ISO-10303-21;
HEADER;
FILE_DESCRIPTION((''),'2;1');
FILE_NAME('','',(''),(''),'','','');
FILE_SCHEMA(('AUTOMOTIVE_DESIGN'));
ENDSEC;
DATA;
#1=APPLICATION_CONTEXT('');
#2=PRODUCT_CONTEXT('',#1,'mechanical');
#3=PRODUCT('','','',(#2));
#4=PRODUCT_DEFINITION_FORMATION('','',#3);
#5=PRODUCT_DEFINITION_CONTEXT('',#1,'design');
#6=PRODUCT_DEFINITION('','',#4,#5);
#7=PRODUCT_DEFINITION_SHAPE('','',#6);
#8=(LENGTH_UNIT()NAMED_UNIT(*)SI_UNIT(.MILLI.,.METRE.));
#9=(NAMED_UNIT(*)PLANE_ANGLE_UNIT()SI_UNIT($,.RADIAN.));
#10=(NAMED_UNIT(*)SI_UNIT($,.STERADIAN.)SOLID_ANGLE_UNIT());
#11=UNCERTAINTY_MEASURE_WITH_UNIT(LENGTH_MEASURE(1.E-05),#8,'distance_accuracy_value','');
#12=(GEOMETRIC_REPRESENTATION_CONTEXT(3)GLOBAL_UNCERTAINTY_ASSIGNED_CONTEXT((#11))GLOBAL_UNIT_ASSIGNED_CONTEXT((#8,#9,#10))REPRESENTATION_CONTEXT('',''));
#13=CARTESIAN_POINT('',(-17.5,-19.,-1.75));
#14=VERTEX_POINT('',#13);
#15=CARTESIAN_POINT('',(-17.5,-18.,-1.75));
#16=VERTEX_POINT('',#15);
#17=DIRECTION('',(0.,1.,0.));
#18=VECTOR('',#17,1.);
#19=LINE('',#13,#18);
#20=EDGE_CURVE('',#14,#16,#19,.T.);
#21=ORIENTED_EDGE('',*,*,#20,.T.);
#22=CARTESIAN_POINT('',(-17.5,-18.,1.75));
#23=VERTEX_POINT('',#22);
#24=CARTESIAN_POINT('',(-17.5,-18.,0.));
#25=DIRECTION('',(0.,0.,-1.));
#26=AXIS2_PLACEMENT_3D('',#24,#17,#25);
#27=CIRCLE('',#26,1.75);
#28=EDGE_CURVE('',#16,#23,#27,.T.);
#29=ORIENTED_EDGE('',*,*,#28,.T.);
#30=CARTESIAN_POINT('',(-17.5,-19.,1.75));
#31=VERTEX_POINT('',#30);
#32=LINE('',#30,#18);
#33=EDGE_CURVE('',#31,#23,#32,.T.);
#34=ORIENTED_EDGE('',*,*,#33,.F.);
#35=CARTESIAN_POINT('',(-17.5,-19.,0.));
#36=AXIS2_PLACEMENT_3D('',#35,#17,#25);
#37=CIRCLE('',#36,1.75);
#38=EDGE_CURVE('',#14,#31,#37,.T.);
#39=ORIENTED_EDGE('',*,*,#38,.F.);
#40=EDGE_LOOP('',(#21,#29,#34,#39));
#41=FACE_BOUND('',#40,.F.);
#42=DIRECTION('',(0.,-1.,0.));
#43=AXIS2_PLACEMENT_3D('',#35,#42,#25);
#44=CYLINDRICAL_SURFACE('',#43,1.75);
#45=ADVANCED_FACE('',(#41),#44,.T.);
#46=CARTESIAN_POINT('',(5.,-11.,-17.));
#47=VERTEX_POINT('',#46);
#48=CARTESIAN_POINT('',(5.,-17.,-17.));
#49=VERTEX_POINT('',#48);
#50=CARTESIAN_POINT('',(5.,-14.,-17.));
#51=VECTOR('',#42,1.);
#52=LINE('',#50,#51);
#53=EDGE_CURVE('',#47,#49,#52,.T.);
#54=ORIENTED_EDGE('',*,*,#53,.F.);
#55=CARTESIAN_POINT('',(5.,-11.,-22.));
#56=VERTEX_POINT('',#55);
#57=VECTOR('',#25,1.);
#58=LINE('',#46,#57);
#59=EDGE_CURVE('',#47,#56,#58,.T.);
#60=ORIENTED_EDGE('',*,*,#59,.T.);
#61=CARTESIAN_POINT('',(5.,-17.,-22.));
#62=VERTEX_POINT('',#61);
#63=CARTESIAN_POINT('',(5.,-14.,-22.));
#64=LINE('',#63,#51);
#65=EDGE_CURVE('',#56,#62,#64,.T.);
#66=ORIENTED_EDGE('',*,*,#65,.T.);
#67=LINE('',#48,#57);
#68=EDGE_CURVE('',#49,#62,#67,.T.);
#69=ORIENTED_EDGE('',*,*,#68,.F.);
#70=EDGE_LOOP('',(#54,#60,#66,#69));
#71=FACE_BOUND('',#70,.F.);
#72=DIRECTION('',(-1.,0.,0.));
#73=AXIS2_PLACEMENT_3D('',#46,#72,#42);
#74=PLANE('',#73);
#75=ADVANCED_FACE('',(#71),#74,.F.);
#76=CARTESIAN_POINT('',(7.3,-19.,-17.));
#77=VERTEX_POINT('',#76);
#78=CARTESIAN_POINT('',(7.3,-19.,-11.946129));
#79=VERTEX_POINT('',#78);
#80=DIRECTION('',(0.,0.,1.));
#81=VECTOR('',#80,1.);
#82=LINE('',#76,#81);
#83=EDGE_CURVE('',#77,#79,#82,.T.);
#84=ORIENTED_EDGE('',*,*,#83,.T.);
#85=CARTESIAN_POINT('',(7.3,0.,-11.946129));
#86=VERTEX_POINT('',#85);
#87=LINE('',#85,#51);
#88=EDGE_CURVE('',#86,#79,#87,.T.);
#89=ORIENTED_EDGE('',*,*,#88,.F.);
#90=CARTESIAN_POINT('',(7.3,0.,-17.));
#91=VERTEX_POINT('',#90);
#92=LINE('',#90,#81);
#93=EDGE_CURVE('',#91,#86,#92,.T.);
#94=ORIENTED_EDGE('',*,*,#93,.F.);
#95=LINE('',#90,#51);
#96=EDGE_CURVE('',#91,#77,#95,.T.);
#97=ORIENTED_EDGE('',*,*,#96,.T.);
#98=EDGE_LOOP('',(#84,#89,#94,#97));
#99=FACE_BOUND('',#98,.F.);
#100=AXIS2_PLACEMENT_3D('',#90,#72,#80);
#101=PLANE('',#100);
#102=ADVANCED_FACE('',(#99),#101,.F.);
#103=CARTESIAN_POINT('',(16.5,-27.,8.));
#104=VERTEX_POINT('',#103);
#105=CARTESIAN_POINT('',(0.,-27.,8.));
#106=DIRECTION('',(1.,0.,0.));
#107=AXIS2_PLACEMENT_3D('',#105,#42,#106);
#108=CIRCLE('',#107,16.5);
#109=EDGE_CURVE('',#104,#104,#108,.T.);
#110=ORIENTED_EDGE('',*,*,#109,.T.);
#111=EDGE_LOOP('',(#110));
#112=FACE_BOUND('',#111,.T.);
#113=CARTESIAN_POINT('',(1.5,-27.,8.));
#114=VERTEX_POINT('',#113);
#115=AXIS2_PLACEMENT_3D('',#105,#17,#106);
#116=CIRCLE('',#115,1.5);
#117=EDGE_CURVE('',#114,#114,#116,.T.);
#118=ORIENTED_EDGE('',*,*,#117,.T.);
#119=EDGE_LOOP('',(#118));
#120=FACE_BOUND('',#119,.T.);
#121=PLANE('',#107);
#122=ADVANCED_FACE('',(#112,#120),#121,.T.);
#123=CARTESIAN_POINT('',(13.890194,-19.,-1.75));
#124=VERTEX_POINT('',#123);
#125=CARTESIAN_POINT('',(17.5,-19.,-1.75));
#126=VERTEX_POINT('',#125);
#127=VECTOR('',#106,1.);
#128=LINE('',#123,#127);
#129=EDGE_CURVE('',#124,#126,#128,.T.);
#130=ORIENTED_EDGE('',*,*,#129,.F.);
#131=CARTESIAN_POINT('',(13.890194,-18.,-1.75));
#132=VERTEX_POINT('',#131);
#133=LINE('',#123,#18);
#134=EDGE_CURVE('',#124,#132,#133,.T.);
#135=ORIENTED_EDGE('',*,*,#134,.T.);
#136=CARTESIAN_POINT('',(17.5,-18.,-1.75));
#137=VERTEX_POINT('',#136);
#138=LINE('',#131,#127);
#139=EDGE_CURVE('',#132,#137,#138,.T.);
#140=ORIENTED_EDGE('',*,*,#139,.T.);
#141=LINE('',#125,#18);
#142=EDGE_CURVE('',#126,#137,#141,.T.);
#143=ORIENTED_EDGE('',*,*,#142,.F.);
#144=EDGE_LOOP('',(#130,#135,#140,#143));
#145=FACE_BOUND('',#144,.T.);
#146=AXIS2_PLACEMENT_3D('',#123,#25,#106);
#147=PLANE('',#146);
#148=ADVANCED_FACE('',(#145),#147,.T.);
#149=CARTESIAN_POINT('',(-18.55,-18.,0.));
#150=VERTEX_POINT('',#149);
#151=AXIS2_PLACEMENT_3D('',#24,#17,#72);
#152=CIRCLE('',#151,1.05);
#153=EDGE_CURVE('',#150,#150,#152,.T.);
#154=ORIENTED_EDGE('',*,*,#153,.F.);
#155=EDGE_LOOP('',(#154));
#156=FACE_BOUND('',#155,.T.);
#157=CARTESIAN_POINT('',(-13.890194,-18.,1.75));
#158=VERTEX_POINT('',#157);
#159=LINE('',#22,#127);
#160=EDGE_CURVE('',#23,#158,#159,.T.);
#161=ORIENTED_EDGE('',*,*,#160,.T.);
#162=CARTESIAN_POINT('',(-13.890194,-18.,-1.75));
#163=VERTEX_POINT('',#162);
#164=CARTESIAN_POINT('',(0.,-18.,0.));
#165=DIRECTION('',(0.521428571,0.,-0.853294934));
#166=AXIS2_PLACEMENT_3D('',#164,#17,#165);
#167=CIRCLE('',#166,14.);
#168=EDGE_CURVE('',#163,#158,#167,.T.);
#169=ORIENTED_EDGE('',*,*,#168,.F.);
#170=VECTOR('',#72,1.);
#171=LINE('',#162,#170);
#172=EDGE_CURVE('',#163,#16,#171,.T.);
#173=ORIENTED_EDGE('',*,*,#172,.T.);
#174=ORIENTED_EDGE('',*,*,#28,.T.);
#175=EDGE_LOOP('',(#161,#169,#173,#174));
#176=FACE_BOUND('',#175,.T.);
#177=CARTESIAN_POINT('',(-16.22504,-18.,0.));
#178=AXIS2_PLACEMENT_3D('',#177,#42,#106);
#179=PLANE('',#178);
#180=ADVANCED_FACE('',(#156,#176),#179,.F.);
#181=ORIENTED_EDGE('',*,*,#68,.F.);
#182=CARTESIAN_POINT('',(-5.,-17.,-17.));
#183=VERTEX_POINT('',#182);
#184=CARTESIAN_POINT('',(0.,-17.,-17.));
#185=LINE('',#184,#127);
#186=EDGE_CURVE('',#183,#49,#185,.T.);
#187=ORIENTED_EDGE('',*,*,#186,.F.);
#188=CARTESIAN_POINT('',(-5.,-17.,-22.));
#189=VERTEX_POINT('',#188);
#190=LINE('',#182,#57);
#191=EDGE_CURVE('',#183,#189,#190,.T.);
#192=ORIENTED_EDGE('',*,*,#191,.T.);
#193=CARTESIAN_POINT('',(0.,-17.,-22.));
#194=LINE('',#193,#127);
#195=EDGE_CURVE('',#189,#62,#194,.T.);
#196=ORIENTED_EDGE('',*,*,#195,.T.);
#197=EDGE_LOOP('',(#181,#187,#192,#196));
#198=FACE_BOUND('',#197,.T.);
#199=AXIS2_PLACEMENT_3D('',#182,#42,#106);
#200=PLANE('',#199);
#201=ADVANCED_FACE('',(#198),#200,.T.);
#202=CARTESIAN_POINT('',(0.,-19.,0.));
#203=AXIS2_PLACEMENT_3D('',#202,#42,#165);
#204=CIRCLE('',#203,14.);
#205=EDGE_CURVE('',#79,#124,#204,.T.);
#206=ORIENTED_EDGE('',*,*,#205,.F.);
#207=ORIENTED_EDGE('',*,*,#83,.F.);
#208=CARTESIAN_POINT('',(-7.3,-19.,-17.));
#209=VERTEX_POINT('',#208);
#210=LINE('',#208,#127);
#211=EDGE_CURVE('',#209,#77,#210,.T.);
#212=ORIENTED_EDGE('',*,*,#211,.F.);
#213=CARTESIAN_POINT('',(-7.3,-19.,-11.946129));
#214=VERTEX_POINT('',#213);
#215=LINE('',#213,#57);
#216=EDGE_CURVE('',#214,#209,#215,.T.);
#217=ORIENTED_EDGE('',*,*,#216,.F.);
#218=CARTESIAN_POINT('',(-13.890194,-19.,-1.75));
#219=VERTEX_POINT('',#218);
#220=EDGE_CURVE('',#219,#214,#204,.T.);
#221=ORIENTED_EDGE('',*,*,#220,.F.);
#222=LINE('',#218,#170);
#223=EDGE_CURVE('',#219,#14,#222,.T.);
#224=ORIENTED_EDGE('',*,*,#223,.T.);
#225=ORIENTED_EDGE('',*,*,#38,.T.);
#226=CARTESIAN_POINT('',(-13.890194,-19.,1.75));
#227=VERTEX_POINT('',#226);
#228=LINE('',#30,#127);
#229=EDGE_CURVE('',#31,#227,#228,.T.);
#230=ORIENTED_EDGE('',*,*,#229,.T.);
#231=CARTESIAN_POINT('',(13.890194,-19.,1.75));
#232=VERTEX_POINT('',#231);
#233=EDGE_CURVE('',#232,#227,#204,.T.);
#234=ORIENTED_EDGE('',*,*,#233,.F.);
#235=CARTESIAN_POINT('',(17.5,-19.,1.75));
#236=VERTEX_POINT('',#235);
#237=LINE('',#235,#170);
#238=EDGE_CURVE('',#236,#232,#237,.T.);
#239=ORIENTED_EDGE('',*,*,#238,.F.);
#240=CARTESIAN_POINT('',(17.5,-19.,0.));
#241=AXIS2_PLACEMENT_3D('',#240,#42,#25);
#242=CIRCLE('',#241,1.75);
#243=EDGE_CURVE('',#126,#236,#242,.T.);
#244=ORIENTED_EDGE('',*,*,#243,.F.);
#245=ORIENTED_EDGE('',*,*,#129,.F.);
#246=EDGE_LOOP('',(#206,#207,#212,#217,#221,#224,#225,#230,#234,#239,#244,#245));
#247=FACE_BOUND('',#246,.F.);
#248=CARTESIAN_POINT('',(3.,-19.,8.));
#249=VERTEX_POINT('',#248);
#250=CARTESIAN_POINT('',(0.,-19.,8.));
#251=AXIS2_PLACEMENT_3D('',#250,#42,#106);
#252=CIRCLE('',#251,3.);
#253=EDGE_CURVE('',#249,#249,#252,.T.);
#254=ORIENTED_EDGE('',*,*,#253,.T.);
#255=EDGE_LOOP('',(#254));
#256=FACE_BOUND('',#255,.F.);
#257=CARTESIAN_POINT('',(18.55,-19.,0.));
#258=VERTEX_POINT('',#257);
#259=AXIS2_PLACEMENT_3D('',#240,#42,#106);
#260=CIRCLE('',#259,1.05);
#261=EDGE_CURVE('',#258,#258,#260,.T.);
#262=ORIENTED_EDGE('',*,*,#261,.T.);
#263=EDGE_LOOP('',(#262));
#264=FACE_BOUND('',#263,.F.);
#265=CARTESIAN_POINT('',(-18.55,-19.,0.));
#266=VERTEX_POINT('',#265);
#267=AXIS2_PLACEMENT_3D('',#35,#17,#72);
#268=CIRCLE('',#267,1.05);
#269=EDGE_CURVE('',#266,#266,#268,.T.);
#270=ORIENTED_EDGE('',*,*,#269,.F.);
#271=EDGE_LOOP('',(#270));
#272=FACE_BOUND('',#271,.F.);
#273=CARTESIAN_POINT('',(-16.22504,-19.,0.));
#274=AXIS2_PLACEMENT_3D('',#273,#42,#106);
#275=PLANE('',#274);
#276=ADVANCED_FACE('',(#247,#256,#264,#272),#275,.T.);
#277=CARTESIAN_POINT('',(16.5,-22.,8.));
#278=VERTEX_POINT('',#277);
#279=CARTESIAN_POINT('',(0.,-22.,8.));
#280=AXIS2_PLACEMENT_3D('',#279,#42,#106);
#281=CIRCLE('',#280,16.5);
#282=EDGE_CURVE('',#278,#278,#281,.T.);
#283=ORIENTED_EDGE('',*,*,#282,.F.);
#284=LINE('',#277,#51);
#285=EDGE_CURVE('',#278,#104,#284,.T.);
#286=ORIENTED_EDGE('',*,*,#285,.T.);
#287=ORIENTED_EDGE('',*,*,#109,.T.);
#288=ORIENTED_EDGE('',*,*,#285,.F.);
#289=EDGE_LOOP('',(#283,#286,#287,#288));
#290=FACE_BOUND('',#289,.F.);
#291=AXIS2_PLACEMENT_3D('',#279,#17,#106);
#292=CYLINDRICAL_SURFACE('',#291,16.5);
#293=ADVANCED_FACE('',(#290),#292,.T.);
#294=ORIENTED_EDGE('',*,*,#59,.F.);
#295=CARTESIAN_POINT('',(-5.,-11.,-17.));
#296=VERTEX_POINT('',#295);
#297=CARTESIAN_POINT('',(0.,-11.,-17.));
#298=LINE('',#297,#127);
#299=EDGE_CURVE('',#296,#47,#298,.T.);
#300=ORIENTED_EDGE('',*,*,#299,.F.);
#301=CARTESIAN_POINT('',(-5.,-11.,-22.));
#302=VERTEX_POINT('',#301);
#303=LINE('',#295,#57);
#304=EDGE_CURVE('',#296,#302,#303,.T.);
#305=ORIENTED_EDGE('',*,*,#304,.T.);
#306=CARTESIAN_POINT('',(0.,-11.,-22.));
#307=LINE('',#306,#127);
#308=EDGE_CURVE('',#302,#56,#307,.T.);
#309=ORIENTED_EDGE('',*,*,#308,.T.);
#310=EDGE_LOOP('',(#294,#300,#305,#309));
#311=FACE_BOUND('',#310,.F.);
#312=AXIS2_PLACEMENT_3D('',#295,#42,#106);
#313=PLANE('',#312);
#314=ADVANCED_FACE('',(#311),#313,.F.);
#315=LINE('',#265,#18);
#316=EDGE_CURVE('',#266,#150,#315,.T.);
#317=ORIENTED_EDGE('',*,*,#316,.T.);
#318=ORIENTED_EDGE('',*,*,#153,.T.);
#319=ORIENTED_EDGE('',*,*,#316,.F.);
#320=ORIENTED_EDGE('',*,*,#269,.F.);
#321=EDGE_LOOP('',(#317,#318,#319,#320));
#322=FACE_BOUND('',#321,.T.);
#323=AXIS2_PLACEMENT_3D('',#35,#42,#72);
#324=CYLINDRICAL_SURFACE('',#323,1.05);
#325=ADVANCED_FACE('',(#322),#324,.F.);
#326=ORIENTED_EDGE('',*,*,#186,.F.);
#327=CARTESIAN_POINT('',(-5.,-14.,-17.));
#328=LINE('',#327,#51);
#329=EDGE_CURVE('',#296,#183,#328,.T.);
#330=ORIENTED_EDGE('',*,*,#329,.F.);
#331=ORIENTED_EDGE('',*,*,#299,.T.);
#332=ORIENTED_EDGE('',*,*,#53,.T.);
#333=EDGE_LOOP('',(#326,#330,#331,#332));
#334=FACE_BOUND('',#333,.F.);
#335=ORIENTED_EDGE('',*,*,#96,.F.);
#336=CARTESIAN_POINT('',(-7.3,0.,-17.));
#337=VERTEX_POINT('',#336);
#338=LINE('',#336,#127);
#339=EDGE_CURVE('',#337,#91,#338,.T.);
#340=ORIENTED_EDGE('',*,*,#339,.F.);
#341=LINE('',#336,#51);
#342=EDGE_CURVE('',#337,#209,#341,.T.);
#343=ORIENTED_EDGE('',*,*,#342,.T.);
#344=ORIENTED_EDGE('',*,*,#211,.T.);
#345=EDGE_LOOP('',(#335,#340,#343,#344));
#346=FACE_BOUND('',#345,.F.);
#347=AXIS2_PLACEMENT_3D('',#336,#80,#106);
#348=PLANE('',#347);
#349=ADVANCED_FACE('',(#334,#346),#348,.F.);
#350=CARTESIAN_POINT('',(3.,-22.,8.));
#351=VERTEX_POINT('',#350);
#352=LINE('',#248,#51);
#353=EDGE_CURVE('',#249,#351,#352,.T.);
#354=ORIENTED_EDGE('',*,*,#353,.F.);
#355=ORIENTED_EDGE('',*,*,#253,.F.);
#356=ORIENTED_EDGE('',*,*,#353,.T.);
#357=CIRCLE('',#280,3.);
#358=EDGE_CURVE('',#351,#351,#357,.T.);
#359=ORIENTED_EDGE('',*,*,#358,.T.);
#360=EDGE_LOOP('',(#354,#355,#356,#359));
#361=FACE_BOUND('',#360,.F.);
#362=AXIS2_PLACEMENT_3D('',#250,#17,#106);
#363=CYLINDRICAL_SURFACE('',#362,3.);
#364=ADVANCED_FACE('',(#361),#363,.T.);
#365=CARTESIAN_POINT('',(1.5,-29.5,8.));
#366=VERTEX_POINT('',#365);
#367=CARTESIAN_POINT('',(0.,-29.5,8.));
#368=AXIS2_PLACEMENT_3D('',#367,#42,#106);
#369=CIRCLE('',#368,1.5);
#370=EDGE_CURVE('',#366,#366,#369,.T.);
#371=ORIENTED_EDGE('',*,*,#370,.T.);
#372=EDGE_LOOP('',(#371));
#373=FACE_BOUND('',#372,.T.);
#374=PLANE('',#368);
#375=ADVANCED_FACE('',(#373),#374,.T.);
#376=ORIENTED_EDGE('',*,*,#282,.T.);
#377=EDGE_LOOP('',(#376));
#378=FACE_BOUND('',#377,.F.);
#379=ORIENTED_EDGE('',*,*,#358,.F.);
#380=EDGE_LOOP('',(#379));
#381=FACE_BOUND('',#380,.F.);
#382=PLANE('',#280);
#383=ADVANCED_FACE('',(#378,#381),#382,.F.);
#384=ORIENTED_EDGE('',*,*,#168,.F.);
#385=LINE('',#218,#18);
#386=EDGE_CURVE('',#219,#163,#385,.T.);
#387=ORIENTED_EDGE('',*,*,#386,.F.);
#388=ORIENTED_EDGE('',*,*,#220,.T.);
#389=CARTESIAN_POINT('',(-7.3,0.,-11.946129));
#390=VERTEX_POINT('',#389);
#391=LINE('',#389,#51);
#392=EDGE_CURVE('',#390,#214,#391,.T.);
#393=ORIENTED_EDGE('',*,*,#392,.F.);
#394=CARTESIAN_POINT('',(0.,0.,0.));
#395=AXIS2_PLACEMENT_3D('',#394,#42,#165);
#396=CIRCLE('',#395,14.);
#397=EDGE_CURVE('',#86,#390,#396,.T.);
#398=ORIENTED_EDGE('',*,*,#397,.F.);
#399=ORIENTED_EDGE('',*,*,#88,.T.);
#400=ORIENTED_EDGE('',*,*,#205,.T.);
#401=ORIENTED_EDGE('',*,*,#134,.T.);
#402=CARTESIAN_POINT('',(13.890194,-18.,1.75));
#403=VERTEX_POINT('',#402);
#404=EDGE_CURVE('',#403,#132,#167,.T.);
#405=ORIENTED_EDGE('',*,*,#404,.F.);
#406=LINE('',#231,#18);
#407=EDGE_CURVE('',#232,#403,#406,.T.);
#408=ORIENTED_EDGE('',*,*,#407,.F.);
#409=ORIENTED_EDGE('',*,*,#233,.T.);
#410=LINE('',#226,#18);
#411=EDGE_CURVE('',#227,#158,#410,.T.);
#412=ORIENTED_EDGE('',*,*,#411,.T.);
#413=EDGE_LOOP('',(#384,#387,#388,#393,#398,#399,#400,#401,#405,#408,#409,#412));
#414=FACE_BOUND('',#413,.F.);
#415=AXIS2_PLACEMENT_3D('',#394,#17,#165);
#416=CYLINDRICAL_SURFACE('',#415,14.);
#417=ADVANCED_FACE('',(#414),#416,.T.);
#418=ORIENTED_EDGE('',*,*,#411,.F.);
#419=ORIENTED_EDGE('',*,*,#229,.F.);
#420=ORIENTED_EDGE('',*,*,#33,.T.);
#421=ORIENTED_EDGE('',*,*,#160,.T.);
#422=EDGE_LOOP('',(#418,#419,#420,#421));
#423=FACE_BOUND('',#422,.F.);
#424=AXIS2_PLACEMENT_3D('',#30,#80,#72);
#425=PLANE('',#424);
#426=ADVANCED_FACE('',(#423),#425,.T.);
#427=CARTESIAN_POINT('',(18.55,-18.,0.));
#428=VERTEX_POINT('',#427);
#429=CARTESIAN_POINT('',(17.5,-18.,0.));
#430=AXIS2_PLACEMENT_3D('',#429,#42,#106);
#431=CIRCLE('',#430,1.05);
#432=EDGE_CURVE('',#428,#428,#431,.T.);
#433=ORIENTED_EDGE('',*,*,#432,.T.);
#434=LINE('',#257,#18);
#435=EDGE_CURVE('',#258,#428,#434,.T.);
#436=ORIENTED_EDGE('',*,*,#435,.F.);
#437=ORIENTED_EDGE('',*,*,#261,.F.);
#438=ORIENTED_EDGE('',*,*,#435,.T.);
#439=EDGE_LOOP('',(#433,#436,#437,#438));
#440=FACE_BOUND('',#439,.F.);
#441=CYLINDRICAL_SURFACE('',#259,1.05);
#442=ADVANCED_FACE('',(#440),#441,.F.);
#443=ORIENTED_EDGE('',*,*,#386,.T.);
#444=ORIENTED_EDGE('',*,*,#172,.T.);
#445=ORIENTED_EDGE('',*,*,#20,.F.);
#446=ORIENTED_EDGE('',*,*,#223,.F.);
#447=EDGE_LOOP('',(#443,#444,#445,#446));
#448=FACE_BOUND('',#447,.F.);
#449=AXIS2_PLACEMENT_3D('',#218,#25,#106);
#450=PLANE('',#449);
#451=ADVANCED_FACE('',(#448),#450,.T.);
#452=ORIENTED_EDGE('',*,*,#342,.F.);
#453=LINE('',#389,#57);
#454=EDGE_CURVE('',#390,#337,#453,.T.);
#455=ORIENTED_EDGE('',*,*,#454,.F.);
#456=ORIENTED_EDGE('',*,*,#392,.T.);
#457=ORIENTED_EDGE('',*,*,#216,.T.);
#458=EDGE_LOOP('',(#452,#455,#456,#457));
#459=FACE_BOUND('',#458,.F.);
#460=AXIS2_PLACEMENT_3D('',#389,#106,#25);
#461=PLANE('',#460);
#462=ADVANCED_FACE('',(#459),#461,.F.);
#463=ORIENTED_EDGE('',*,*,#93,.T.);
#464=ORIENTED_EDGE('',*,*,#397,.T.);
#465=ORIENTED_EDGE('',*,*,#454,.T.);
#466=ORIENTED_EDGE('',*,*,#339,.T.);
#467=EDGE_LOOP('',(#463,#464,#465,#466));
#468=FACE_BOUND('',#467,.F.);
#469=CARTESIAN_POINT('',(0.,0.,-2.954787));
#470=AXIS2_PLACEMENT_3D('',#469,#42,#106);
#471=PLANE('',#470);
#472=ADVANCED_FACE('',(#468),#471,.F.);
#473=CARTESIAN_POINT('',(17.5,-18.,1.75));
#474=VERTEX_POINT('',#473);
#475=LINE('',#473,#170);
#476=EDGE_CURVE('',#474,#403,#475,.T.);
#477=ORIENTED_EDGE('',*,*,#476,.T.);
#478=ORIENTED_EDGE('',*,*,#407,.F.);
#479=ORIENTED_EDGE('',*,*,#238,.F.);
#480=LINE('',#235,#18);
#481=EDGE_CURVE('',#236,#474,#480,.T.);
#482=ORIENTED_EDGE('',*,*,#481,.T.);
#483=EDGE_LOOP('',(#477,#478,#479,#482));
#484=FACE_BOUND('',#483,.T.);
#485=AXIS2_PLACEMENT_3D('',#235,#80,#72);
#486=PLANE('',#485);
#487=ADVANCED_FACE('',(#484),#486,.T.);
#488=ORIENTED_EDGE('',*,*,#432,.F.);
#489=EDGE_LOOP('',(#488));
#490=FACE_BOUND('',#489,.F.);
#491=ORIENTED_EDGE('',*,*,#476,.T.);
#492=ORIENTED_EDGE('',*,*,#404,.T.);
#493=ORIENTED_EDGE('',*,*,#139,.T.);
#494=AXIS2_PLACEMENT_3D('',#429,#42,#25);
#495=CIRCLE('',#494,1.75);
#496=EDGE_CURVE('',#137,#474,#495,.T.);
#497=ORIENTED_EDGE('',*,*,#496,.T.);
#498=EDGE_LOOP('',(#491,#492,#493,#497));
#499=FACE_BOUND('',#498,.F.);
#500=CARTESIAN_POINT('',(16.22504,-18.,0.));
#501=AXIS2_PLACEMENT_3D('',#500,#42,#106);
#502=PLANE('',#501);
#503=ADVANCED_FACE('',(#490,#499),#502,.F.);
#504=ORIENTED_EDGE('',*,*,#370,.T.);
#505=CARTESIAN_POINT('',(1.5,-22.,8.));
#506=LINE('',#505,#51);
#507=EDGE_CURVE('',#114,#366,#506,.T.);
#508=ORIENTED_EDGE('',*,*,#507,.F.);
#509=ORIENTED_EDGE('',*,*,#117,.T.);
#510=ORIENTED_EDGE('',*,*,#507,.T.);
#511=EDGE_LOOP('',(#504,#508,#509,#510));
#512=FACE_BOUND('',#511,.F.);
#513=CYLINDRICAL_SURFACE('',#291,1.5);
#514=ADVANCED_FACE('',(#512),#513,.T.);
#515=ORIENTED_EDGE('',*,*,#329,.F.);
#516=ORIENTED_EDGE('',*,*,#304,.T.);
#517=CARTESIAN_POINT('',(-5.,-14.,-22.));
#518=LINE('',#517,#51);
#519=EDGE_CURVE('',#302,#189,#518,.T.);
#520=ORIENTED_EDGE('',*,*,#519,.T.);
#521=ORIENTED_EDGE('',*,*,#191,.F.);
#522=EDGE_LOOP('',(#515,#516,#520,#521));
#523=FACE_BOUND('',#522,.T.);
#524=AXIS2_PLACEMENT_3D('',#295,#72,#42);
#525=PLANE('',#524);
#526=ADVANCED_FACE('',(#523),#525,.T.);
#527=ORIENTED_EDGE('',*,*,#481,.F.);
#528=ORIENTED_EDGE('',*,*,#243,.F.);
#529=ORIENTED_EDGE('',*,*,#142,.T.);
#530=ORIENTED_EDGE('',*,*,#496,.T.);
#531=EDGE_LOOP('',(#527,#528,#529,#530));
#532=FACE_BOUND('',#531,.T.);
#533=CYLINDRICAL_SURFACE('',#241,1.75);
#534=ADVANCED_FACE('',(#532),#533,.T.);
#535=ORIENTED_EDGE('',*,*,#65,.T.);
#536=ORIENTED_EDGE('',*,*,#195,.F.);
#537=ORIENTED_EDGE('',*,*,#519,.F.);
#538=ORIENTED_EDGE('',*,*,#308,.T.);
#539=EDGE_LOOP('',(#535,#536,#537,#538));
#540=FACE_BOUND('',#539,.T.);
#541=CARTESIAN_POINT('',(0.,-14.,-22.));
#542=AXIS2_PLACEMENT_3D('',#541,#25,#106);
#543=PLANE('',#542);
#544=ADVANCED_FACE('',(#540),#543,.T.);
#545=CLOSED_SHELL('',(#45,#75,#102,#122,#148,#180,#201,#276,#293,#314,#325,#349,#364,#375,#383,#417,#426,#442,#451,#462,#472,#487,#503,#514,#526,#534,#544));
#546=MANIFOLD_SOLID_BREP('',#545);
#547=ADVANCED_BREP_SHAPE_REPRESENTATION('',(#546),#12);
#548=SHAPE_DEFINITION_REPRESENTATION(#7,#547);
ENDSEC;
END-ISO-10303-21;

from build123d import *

# Parameters (mm, degrees)
F1_DEPTH  = 19
F2_R      = 3
F3_DEPTH  = 3
F4_R      = 1.5
F5_DEPTH  = 7.5
F6_R      = 1.05
F7_DEPTH  = 1
F8_R      = 16.5
F9_DEPTH  = 5
F10_W     = 10
F10_H     = 6
F11_DEPTH = 5


# Not quite as in the source:
# - a pattern or mirror of a feature is missing from the dataset's text; its kind, count and spacing are read off the source's solid


with BuildPart() as f1:
    # F0 (on Front) → F1 (new body)
    with BuildSketch(Plane.XZ):
        with BuildLine():
            Line((7.3, -17), (7.3, -11.9461290802))
            ThreePointArc((7.3, -11.9461290802), (0, 14), (-7.3, -11.9461290802))
            Line((-7.3, -11.9461290802), (-7.3, -17))
            Line((-7.3, -17), (7.3, -17))
        make_face()
    extrude(amount=F1_DEPTH)

    # F2 (on face) → F3 (join)
    with BuildSketch(Plane.XZ.offset(19)):
        with Locations((0, 8)):
            Circle(F2_R)
    extrude(amount=F3_DEPTH)

    # F4 (on face) → F5 (join)
    with BuildSketch(Plane.XZ.offset(22)):
        with Locations((0, 8)):
            Circle(F4_R)
    extrude(amount=F5_DEPTH)

    # F6 (on face) → F7 (join)
    with BuildSketch(Plane.XZ.offset(19)):
        with BuildLine():
            Line((13.8901943831, -1.75), (17.5, -1.75))
            ThreePointArc((17.5, -1.75), (19.25, 0), (17.5, 1.75))
            Line((17.5, 1.75), (13.8901943831, 1.75))
            Line((13.8901943831, 1.75), (13.8901943831, -1.75))
        make_face()
        with Locations((17.5, 0)):
            Circle(F6_R, mode=Mode.SUBTRACT)
    f7 = extrude(amount=-F7_DEPTH)

    # F7_copies: F7 across plane
    add(f7.mirror(Plane(origin=(0, 0, 0), x_dir=(0, 0, -1), z_dir=(-1, 0, 0))))

    # F8 (on face) → F9 (join)
    with BuildSketch(Plane.XZ.offset(22)):
        with Locations((0, 8)):
            Circle(F8_R)
    extrude(amount=F9_DEPTH)

    # F10 (on face) → F11 (join)
    with BuildSketch(Plane(origin=(0, 0, -17), x_dir=(1, 0, 0), z_dir=(0, 0, -1))):
        with Locations((0, 14)):
            Rectangle(F10_W, F10_H)
    extrude(amount=F11_DEPTH)


solid = f1.part
